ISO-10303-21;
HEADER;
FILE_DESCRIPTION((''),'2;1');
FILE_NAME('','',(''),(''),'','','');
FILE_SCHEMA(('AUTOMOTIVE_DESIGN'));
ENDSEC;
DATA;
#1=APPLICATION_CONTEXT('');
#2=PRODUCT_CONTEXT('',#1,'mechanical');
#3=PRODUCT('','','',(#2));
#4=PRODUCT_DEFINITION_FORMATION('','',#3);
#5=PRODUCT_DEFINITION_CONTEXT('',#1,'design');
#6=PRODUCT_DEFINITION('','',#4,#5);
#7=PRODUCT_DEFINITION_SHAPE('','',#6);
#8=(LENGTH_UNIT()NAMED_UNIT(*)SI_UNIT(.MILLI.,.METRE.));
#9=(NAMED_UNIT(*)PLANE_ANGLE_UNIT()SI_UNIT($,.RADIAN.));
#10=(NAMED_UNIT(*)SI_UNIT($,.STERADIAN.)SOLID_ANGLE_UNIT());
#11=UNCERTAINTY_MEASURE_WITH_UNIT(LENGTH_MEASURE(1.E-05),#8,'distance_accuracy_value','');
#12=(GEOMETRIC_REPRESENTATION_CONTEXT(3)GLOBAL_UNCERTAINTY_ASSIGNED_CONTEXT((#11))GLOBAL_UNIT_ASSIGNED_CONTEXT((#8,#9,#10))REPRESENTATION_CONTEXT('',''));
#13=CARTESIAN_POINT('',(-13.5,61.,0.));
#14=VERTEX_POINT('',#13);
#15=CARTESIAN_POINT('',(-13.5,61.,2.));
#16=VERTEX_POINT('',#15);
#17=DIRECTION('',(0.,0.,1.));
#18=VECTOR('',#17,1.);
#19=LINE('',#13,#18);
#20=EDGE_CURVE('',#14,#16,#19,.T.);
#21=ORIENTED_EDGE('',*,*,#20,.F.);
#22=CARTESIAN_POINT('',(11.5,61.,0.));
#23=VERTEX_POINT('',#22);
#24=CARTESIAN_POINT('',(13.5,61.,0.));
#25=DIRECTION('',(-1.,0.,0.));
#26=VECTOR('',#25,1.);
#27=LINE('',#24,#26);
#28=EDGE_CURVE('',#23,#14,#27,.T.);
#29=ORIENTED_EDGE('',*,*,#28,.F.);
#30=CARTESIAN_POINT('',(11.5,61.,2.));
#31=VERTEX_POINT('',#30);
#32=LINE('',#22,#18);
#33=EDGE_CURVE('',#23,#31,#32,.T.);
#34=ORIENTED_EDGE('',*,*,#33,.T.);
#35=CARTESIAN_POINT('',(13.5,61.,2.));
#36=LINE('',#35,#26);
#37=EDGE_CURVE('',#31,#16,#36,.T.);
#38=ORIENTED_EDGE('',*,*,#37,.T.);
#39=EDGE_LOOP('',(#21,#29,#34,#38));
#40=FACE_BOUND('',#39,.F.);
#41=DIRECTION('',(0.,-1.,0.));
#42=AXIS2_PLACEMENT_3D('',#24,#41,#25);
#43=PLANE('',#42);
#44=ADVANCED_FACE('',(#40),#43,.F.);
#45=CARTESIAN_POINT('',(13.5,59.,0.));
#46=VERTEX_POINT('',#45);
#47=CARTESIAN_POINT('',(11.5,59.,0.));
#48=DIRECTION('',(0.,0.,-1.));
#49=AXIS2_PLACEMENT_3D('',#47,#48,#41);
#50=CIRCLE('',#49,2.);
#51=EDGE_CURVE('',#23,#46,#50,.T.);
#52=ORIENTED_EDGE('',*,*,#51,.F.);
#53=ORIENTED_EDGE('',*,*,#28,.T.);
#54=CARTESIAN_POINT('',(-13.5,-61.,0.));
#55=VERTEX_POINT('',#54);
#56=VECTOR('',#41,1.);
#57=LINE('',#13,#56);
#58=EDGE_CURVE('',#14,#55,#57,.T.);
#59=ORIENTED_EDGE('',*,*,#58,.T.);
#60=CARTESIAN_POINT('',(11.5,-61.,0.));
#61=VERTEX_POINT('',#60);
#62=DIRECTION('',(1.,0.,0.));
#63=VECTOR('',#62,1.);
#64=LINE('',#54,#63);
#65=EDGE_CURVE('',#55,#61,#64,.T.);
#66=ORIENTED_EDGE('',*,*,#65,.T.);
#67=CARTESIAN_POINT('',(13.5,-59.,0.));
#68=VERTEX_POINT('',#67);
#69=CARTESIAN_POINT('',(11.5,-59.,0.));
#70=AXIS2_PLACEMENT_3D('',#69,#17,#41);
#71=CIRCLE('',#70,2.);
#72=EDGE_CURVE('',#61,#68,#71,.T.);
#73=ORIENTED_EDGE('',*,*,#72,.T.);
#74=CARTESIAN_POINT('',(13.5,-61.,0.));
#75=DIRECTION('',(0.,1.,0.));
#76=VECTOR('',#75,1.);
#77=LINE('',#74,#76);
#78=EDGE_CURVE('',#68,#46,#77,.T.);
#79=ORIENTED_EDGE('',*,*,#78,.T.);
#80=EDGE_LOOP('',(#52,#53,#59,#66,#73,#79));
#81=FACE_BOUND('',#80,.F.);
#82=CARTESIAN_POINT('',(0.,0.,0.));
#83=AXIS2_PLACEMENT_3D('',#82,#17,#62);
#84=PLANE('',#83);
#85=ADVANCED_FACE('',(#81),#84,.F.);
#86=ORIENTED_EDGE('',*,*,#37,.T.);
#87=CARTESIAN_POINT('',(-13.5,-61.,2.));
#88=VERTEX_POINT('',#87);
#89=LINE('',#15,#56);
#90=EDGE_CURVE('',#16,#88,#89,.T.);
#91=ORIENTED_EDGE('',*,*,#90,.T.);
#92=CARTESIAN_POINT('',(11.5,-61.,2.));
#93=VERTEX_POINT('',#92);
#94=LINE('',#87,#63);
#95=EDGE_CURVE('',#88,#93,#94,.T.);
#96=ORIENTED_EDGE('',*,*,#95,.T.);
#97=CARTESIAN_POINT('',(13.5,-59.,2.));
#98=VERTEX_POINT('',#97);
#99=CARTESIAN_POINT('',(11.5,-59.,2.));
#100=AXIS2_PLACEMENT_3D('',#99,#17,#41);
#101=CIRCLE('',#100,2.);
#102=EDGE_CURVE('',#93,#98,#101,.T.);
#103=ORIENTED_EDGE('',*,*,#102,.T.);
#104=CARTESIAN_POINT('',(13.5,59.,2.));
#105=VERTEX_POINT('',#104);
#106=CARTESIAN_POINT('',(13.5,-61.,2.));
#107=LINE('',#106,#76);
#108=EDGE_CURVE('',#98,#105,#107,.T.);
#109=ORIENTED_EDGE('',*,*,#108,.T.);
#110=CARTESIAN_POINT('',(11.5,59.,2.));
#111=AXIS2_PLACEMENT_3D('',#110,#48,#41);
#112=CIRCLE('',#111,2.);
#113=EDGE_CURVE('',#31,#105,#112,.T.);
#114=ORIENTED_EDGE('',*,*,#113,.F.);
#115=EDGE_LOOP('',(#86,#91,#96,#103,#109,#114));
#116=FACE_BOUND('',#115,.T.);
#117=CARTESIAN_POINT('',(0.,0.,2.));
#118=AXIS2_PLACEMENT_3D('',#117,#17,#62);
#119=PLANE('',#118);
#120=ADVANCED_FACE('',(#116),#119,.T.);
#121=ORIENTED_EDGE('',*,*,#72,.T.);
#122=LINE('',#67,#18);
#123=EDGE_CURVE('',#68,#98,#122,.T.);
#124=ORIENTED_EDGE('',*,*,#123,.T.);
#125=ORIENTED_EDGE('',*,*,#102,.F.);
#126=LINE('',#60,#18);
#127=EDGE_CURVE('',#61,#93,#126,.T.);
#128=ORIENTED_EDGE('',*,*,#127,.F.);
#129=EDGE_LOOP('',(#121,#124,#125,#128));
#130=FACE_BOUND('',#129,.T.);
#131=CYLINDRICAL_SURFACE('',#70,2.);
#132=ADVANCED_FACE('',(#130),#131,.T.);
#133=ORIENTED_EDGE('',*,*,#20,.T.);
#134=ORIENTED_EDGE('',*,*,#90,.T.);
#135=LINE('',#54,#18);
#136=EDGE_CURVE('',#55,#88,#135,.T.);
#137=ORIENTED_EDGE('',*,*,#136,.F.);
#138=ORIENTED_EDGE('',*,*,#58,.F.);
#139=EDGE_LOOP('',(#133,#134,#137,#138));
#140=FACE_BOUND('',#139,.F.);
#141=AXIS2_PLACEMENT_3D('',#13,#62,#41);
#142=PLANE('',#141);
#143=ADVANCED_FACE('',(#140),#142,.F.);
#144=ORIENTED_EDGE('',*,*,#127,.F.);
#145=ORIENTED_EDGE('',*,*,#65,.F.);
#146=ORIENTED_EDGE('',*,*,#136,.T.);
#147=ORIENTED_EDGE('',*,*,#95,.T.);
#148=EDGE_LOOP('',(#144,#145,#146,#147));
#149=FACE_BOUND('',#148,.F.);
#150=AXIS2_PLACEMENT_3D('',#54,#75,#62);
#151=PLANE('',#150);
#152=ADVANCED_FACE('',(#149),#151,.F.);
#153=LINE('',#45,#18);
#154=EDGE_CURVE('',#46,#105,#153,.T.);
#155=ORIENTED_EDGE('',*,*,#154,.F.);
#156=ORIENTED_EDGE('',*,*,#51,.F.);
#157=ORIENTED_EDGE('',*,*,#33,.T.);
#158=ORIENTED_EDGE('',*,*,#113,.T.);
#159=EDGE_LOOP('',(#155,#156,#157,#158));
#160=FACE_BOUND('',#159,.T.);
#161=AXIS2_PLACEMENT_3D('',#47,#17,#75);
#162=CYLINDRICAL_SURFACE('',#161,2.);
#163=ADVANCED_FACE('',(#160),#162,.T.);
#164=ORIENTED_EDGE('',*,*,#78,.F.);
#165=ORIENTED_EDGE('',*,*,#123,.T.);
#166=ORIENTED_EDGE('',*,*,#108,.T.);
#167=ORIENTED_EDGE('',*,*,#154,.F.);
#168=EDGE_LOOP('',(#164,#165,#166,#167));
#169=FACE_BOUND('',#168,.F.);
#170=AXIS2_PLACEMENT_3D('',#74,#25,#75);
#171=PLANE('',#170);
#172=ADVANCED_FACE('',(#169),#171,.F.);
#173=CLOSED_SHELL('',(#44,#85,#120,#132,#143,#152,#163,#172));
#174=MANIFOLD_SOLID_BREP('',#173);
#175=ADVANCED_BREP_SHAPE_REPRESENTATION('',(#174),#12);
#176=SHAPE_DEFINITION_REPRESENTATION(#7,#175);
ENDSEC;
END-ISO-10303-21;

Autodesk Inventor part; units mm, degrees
ref_plane "YZ Plane" through (0, 0, 0) normal (1, 0, 0) x (0, 1, 0)
ref_plane "XZ Plane" through (0, 0, 0) normal (0, 1, 0) x (-1, 0, 0)
ref_plane "XY Plane" through (0, 0, 0) normal (0, 0, 1) x (1, 0, 0)
sketch "Sketch1" plane through (0, 0, 0) normal (0, 0, 1) x (1, 0, 0)
  line L0 (-13.5, -61) -> (13.5, -61)
  line L1 (13.5, -61) -> (13.5, 61)
  line L2 (13.5, 61) -> (-13.5, 61)
  line L3 (-13.5, 61) -> (-13.5, -61)
  line L4 (-13.5, -61) -> (13.5, 61) construction
  line L5 (13.5, -61) -> (-13.5, 61) construction
  circle A0 centre (-1.5, 51) radius 5.5
  circle A1 centre (-1.5, -51) radius 5.5
  line L6 (-13.5, 0) -> (13.5, 0) construction
  point P0 (0, 0)
  point P1 (0, 0)
  dimension "d0" = 27
  dimension "d1" = 122
  dimension "d12" = 11
  dimension "d13" = 102
  dimension "d15" = 15
extrude "Plate1" add sketch "Sketch1" along normal blind 2 contours L3 L2 L1 L0 | A0 | A1
sketch "Sketch2" plane through (0, 0, 0) normal (0, 0, -1) x (-1, 0, 0)
  line L0 (6.5, 41) -> (206.5, 41) construction
  line L1 (206.5, 41) -> (206.5, 21) construction
  line L2 (206.5, 21) -> (6.5, 21) construction
  line L3 (6.5, 21) -> (6.5, 41) construction
  line L4 (-13.5, 61) -> (13.5, 61) projected
  line L5 (-13.5, -61) -> (-13.5, 61) projected
  point P0 (0, 0)
  point P1 (-48, 100)
  point P2 (13.5, 61)
  point P3 (-50, 98)
  dimension "d6" = 200
  dimension "d9" = 20
  dimension "d10" = 20
  dimension "d11" = 20
mark "Mark1"
fillet "Corner Round1" radius 2 2 edges at (13.5, -61, 1) (13.5, 61, 1)
equation "\"d2\" = Thickness"
equation "\"BendReliefWidth\" = Thickness"
equation "\"BendReliefDepth\" = 0.5 * Thickness"
equation "\"CornerReliefSize\" = 4 * Thickness"
equation "\"MinimumRemnant\" = 2 * Thickness"
equation "\"TransitionRadius\" = BendRadius"
equation "\"JacobiRadiusSize\" = BendRadius"
equation "\"GapSize\" = Thickness"
equation "\"Thickness\" = 2"
equation "\"BendRadius\" = 2.75"
properties part number "TRM 036 box 1" material "AISI 304"
